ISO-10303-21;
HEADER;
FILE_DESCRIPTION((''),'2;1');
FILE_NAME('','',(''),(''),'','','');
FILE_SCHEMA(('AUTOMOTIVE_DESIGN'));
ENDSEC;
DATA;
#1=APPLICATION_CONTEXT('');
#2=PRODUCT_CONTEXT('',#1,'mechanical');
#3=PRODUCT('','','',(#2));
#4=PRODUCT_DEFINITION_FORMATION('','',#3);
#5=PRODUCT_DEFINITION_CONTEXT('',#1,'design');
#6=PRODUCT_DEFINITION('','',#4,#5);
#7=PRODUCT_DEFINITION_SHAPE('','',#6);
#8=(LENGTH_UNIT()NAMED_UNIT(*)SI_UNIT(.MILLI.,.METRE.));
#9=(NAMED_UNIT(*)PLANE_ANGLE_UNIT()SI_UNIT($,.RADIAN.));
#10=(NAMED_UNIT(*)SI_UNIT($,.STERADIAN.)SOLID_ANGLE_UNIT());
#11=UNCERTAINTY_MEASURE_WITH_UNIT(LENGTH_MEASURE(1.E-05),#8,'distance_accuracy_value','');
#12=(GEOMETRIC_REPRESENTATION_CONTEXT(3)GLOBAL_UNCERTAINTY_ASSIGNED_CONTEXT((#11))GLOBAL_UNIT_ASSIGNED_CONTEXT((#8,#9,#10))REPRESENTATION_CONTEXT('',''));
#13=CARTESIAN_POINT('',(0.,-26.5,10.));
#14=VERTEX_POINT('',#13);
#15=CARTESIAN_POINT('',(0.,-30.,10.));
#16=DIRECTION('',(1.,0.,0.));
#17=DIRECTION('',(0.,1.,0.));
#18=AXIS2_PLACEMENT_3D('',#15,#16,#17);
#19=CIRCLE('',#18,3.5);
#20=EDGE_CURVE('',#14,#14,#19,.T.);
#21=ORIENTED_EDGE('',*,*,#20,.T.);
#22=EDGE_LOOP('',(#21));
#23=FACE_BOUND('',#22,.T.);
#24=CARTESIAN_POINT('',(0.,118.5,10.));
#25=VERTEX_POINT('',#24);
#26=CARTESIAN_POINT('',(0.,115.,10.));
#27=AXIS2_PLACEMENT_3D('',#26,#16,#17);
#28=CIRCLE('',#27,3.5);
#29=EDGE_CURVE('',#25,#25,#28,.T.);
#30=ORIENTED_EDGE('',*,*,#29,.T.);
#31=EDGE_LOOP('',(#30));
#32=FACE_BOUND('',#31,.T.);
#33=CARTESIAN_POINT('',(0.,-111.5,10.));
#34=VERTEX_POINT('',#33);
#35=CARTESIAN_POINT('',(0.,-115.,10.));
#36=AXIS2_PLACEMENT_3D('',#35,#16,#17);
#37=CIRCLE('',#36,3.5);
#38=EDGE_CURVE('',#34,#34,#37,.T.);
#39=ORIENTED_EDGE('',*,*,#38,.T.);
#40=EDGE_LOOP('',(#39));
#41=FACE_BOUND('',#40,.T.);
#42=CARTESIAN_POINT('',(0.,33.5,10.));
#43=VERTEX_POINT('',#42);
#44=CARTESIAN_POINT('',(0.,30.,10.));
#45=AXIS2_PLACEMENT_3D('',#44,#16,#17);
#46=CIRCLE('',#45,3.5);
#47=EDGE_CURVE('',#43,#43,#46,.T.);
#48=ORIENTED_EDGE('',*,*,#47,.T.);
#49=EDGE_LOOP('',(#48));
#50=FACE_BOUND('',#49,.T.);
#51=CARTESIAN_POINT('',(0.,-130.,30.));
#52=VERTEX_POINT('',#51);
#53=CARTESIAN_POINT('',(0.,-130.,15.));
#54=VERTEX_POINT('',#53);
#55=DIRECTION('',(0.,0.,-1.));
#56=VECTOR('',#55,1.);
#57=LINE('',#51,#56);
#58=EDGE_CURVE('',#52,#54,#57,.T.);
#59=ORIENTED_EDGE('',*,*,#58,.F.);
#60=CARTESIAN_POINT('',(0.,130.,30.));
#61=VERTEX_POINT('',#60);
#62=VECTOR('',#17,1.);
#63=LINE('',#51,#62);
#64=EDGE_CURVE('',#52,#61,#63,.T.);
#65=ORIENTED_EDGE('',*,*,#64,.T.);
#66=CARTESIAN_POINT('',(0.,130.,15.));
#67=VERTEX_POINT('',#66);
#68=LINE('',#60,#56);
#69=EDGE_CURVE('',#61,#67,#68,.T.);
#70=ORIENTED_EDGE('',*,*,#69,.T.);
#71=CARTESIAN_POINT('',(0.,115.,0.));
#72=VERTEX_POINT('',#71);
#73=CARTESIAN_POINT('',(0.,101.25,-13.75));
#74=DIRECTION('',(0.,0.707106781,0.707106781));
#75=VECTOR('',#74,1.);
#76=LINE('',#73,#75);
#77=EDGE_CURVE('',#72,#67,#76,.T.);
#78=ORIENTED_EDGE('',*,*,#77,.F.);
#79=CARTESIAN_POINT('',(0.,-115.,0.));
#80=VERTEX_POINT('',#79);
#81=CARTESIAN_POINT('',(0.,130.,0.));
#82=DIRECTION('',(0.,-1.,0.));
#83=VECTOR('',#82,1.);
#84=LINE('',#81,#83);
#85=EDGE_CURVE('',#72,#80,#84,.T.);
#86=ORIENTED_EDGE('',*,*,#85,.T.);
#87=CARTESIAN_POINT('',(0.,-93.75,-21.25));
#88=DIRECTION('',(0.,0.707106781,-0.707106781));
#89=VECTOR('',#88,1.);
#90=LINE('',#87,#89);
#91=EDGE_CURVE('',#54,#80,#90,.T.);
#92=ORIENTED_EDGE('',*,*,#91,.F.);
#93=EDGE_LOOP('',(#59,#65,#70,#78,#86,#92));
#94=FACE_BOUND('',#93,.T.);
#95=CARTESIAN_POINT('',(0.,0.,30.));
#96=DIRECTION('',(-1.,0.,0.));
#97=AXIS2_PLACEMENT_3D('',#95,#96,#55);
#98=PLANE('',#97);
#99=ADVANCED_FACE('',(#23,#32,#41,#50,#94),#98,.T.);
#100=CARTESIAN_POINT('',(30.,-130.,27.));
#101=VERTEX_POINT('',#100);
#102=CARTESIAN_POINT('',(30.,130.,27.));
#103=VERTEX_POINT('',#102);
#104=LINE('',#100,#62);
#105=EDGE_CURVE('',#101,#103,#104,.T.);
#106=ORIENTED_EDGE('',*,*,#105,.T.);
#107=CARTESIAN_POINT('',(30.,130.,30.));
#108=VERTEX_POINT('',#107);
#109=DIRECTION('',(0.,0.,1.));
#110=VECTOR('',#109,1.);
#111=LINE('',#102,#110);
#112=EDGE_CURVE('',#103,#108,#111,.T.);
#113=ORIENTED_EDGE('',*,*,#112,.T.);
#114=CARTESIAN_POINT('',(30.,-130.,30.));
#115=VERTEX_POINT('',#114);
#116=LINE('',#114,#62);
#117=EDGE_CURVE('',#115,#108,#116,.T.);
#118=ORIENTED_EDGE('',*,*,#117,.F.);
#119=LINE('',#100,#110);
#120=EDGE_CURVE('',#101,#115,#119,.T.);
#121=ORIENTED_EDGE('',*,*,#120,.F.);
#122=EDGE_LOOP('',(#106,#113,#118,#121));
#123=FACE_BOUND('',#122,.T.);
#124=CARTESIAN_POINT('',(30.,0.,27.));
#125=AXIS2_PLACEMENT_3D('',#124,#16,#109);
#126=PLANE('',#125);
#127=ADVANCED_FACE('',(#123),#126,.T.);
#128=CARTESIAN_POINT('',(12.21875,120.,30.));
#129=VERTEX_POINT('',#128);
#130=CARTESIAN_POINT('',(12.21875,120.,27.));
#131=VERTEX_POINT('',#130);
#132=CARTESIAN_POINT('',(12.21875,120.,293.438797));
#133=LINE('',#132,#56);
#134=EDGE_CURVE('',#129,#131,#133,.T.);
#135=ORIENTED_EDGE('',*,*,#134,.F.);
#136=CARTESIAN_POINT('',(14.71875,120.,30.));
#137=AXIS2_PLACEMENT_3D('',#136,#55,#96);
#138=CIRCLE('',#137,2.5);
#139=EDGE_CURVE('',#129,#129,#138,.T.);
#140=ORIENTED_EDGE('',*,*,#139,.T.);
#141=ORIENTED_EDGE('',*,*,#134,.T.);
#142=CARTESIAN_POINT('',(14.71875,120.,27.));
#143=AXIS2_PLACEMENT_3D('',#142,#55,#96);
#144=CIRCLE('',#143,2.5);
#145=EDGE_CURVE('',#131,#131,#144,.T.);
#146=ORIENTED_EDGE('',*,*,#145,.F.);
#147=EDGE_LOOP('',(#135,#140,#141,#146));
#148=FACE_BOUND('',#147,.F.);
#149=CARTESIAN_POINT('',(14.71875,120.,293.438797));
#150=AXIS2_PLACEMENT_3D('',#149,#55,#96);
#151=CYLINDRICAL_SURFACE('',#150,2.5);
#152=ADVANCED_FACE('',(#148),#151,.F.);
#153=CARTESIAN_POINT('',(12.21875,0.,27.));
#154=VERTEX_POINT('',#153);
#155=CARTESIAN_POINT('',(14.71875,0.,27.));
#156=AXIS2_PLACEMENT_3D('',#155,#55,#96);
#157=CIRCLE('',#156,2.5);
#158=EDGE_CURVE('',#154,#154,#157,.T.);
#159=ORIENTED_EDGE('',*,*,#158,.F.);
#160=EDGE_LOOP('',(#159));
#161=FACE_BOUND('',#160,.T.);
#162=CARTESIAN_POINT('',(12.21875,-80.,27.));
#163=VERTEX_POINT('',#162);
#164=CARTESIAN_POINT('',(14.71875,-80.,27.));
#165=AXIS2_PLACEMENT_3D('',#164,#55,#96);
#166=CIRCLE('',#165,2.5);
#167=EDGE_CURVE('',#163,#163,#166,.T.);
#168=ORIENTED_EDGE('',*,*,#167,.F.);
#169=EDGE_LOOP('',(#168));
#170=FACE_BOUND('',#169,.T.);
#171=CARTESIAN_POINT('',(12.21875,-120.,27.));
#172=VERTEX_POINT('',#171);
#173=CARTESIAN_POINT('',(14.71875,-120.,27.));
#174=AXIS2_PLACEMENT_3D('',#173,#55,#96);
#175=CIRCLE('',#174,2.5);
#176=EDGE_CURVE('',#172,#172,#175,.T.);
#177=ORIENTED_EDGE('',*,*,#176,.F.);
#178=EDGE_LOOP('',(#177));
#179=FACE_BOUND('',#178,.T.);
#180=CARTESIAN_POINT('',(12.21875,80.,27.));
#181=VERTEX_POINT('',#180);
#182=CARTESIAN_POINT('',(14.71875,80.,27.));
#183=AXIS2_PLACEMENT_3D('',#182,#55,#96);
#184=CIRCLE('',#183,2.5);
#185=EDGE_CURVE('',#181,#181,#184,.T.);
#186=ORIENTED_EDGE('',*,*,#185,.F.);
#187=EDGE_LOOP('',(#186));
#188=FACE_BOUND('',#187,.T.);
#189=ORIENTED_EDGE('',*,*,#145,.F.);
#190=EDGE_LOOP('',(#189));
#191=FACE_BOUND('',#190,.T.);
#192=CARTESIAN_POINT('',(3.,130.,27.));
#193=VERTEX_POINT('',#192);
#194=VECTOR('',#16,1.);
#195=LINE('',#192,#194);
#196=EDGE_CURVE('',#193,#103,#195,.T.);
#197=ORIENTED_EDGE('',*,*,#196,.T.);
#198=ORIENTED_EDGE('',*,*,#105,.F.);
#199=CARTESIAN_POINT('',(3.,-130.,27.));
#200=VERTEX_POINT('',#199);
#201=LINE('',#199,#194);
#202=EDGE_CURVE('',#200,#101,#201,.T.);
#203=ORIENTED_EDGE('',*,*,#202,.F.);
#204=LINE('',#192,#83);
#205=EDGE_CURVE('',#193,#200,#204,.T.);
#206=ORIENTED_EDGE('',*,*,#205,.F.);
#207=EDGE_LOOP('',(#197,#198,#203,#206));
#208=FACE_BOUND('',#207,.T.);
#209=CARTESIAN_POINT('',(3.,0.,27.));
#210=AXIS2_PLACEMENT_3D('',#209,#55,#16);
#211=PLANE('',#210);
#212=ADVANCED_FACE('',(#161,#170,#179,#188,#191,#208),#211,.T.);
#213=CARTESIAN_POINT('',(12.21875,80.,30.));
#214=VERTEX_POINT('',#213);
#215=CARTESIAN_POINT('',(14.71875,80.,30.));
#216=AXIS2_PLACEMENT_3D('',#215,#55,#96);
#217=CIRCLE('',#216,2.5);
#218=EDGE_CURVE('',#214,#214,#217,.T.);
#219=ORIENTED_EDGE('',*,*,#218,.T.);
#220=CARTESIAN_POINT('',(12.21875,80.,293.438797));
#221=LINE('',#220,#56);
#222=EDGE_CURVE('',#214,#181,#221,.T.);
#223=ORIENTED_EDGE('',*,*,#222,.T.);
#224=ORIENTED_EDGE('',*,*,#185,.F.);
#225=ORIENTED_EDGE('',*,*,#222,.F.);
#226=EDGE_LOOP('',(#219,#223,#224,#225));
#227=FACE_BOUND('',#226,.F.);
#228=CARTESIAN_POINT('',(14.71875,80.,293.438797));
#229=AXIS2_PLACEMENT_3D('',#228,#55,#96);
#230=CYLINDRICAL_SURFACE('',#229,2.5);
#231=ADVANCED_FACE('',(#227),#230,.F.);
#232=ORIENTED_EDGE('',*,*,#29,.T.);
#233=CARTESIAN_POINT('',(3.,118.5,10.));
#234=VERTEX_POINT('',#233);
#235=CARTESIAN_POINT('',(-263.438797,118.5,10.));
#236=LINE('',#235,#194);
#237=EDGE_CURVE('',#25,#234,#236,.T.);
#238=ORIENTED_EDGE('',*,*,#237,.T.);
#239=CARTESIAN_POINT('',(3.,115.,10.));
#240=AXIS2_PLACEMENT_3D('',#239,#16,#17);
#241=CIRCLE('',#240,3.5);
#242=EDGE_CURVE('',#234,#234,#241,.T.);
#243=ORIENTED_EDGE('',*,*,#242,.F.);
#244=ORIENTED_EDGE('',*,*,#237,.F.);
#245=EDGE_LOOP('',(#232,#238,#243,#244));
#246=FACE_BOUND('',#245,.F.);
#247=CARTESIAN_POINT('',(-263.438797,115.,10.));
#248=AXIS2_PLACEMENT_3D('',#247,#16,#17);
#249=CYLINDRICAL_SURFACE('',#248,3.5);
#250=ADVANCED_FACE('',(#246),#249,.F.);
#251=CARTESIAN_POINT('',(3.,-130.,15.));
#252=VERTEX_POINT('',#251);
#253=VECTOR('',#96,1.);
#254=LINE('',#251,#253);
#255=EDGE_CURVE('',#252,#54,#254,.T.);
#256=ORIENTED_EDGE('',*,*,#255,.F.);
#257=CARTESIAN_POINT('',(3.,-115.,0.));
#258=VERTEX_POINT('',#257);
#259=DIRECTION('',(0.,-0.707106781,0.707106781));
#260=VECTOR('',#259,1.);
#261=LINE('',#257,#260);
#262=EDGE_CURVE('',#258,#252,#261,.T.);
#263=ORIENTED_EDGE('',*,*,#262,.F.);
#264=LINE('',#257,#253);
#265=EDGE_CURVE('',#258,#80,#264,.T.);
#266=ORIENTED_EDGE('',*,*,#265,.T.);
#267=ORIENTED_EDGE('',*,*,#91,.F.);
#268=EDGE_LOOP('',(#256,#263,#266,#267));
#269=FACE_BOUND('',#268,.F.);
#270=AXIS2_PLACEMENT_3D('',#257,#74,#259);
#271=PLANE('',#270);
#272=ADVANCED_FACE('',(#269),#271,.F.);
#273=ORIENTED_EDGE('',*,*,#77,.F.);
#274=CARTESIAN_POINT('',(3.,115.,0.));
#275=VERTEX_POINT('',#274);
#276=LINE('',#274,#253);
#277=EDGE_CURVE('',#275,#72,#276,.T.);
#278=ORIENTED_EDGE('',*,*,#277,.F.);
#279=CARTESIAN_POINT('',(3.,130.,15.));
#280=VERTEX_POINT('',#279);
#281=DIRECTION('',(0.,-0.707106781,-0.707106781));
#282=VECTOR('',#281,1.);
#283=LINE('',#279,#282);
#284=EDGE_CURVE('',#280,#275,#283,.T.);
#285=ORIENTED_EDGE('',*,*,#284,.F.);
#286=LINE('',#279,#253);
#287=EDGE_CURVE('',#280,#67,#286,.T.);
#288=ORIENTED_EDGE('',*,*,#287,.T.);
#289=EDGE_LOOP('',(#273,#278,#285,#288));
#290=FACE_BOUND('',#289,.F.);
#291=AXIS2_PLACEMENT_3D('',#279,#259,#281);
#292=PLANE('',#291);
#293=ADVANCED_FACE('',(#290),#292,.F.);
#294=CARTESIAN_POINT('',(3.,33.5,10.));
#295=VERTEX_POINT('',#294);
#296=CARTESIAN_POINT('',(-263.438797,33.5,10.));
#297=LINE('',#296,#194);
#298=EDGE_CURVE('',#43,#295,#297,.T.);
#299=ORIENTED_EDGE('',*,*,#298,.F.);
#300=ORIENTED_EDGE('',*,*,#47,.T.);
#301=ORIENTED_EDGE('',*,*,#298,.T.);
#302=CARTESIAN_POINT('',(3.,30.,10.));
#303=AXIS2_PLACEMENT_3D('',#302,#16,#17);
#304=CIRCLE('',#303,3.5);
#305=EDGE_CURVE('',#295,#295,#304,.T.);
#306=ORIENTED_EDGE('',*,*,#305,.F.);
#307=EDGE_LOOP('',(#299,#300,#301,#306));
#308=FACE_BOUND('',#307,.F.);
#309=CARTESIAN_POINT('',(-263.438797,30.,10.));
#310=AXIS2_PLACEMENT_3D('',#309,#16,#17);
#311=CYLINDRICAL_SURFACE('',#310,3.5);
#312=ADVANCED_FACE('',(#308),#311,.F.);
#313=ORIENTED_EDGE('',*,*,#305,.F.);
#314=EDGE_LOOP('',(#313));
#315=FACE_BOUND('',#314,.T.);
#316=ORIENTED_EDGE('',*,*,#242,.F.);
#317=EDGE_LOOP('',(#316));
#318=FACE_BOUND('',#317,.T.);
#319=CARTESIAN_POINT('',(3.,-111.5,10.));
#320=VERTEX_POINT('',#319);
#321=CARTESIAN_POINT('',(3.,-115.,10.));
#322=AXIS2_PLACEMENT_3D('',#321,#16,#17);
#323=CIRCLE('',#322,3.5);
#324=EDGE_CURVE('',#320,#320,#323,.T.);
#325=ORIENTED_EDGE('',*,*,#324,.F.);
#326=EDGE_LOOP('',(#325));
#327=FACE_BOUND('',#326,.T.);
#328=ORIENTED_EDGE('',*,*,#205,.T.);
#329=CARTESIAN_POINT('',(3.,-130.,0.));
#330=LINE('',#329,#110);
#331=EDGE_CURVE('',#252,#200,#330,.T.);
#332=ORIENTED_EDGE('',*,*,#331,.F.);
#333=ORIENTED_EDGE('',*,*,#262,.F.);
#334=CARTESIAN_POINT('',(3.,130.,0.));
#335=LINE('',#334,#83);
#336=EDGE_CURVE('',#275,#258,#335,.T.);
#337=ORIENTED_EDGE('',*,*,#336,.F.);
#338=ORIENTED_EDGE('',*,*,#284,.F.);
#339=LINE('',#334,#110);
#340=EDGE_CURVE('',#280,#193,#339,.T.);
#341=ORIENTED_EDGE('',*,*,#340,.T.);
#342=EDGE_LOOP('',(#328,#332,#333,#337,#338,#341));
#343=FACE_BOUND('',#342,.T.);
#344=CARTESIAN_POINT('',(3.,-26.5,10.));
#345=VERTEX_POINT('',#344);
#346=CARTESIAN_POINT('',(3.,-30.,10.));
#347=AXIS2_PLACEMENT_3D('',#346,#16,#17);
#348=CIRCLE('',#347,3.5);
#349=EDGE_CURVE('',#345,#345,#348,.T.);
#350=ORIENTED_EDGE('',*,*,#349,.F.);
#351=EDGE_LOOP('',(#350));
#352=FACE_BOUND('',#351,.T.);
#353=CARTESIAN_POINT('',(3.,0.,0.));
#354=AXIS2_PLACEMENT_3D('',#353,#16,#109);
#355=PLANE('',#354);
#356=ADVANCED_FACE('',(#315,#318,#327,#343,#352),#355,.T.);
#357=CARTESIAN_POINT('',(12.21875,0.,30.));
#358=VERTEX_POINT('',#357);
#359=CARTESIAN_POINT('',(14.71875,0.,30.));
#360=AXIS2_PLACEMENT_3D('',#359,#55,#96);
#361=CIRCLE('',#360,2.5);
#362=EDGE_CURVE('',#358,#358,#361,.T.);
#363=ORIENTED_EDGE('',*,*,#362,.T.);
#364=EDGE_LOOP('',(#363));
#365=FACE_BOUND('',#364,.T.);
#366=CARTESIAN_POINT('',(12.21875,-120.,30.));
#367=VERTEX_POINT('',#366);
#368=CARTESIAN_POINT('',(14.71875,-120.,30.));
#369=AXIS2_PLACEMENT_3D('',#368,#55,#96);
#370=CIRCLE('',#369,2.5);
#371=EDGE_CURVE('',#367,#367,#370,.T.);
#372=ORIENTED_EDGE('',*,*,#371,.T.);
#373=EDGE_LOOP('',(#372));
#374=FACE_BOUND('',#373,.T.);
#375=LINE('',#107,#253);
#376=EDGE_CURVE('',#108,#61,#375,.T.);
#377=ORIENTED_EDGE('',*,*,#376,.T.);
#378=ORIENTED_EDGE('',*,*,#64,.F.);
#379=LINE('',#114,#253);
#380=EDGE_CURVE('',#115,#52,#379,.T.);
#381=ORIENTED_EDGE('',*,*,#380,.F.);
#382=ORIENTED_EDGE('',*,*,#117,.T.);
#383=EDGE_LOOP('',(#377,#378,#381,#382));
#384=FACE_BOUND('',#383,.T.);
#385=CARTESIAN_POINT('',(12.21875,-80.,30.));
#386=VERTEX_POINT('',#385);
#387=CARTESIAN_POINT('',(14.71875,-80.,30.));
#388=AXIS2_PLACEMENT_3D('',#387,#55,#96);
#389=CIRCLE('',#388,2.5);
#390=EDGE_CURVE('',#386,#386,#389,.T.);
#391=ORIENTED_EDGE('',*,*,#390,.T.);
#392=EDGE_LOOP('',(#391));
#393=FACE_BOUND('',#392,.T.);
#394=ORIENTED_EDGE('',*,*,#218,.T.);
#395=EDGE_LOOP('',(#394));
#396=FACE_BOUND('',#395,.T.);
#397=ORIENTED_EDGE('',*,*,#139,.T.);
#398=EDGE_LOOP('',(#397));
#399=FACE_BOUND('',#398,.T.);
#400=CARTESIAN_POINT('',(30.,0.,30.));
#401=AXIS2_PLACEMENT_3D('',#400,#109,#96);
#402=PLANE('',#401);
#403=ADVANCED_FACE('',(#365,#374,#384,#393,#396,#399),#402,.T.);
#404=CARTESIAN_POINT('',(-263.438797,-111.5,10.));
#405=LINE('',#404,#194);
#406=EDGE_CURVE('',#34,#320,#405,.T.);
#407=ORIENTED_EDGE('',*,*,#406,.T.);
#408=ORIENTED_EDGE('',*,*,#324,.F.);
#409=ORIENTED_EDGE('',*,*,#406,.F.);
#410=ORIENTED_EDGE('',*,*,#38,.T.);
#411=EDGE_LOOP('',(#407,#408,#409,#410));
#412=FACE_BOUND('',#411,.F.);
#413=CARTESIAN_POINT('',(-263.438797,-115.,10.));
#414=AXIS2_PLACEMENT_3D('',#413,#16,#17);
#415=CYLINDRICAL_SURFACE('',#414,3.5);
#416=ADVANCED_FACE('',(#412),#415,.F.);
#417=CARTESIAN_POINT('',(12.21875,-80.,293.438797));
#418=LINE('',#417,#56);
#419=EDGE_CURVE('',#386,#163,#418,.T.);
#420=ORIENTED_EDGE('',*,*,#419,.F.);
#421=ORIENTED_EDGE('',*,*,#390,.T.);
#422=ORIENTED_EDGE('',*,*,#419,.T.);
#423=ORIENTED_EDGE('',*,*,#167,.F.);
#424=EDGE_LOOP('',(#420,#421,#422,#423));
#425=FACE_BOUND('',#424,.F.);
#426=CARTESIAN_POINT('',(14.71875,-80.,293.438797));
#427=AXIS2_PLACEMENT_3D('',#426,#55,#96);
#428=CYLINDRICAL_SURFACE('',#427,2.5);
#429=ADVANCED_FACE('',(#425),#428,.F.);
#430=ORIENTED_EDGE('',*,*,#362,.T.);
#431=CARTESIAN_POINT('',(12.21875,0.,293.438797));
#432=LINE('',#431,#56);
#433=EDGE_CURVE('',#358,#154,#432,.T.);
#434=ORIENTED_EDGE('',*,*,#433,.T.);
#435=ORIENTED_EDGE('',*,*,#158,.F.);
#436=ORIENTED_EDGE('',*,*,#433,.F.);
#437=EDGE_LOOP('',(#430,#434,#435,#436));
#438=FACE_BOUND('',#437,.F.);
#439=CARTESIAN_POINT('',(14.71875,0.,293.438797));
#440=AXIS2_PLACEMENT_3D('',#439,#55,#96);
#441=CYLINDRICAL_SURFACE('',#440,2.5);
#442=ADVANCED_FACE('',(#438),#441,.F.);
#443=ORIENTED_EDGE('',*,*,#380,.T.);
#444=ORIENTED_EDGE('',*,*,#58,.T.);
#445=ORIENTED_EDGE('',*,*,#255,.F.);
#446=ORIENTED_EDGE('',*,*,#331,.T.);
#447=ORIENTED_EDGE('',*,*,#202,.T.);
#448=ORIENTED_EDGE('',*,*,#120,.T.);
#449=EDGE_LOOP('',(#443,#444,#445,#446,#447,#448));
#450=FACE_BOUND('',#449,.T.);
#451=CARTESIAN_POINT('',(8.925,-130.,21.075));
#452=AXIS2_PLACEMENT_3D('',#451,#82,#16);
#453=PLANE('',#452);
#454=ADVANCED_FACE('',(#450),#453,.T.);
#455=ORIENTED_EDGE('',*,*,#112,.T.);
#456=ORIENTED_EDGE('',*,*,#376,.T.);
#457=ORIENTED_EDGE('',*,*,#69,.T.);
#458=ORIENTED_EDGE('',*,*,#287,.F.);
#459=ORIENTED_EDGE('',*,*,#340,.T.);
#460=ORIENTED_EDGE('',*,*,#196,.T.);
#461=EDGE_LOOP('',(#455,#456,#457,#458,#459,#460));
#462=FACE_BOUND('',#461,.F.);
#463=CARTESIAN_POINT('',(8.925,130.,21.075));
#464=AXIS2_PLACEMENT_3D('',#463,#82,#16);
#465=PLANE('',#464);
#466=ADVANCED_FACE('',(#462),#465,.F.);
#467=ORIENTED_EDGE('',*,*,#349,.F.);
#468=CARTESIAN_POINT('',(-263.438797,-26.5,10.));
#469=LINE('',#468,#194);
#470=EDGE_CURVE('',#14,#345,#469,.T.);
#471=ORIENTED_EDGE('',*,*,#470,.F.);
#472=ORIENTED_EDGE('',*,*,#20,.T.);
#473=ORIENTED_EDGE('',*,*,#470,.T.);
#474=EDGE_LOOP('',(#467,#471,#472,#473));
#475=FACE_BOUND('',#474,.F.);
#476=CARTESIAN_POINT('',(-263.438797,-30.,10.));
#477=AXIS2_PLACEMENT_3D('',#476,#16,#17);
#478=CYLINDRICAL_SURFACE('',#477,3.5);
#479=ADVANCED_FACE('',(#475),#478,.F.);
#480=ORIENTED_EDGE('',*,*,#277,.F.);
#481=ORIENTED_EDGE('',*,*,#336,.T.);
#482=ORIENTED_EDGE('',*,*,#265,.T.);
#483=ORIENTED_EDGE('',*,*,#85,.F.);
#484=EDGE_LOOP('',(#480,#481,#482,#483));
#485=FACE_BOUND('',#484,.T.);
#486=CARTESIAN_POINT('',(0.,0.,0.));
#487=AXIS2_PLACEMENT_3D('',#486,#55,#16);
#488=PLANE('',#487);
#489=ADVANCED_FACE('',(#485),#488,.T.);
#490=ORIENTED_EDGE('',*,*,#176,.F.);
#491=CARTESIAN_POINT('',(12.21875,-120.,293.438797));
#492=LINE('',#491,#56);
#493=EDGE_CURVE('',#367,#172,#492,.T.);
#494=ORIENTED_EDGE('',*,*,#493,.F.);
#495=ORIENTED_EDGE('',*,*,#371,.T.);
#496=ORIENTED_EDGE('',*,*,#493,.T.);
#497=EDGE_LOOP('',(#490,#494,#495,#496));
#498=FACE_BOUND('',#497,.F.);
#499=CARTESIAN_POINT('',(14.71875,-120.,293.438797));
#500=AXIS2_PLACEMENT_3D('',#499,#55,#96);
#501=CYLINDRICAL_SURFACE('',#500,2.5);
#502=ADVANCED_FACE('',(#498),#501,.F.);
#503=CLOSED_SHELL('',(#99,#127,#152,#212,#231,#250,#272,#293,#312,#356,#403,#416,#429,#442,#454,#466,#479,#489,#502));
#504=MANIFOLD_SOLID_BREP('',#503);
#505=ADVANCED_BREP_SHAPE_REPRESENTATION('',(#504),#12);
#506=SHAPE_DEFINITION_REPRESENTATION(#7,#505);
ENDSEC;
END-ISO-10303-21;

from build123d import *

# Parameters (mm, degrees)
F1_DEPTH = 130
F3_D     = 7
F5_D     = 5
F7_DEPTH = 25


# Not quite as in the source:
# - a feature names something its author has since deleted; it is built from what else it names


with BuildPart() as f1:
    # F0 (on Front) → F1 (new body, symmetric)
    with BuildSketch(Plane.XZ):
        Polygon((0, 30), (0, 0), (3, 0), (3, 27), (30, 27), (30, 30), align=None)
    extrude(amount=F1_DEPTH, both=True)

    # F3 (through all)
    with Locations(Plane(origin=(0, 0, 0), x_dir=(0, -1, 0), z_dir=(-1, 0, 0))):
        with Locations((-115, 10), (-30, 10), (30, 10), (115, 10)):
            Hole(F3_D / 2)

    # F5 (through all)
    with Locations(Plane.XY.offset(30)):
        with Locations((14.7187495604, -120), (14.7187495604, -80), (14.7187495604, 0), (14.7187495604, 80), (14.7187495604, 120)):
            Hole(F5_D / 2)

    # F6 (on face) → F7 (cut)
    with BuildSketch(Plane.YZ.offset(3)):
        Polygon((-130, 15), (-130, 0), (-115, 0), align=None)
        Polygon((130, 15), (115, 0), (130, 0), align=None)
    extrude(amount=-F7_DEPTH, mode=Mode.SUBTRACT)


solid = f1.part
